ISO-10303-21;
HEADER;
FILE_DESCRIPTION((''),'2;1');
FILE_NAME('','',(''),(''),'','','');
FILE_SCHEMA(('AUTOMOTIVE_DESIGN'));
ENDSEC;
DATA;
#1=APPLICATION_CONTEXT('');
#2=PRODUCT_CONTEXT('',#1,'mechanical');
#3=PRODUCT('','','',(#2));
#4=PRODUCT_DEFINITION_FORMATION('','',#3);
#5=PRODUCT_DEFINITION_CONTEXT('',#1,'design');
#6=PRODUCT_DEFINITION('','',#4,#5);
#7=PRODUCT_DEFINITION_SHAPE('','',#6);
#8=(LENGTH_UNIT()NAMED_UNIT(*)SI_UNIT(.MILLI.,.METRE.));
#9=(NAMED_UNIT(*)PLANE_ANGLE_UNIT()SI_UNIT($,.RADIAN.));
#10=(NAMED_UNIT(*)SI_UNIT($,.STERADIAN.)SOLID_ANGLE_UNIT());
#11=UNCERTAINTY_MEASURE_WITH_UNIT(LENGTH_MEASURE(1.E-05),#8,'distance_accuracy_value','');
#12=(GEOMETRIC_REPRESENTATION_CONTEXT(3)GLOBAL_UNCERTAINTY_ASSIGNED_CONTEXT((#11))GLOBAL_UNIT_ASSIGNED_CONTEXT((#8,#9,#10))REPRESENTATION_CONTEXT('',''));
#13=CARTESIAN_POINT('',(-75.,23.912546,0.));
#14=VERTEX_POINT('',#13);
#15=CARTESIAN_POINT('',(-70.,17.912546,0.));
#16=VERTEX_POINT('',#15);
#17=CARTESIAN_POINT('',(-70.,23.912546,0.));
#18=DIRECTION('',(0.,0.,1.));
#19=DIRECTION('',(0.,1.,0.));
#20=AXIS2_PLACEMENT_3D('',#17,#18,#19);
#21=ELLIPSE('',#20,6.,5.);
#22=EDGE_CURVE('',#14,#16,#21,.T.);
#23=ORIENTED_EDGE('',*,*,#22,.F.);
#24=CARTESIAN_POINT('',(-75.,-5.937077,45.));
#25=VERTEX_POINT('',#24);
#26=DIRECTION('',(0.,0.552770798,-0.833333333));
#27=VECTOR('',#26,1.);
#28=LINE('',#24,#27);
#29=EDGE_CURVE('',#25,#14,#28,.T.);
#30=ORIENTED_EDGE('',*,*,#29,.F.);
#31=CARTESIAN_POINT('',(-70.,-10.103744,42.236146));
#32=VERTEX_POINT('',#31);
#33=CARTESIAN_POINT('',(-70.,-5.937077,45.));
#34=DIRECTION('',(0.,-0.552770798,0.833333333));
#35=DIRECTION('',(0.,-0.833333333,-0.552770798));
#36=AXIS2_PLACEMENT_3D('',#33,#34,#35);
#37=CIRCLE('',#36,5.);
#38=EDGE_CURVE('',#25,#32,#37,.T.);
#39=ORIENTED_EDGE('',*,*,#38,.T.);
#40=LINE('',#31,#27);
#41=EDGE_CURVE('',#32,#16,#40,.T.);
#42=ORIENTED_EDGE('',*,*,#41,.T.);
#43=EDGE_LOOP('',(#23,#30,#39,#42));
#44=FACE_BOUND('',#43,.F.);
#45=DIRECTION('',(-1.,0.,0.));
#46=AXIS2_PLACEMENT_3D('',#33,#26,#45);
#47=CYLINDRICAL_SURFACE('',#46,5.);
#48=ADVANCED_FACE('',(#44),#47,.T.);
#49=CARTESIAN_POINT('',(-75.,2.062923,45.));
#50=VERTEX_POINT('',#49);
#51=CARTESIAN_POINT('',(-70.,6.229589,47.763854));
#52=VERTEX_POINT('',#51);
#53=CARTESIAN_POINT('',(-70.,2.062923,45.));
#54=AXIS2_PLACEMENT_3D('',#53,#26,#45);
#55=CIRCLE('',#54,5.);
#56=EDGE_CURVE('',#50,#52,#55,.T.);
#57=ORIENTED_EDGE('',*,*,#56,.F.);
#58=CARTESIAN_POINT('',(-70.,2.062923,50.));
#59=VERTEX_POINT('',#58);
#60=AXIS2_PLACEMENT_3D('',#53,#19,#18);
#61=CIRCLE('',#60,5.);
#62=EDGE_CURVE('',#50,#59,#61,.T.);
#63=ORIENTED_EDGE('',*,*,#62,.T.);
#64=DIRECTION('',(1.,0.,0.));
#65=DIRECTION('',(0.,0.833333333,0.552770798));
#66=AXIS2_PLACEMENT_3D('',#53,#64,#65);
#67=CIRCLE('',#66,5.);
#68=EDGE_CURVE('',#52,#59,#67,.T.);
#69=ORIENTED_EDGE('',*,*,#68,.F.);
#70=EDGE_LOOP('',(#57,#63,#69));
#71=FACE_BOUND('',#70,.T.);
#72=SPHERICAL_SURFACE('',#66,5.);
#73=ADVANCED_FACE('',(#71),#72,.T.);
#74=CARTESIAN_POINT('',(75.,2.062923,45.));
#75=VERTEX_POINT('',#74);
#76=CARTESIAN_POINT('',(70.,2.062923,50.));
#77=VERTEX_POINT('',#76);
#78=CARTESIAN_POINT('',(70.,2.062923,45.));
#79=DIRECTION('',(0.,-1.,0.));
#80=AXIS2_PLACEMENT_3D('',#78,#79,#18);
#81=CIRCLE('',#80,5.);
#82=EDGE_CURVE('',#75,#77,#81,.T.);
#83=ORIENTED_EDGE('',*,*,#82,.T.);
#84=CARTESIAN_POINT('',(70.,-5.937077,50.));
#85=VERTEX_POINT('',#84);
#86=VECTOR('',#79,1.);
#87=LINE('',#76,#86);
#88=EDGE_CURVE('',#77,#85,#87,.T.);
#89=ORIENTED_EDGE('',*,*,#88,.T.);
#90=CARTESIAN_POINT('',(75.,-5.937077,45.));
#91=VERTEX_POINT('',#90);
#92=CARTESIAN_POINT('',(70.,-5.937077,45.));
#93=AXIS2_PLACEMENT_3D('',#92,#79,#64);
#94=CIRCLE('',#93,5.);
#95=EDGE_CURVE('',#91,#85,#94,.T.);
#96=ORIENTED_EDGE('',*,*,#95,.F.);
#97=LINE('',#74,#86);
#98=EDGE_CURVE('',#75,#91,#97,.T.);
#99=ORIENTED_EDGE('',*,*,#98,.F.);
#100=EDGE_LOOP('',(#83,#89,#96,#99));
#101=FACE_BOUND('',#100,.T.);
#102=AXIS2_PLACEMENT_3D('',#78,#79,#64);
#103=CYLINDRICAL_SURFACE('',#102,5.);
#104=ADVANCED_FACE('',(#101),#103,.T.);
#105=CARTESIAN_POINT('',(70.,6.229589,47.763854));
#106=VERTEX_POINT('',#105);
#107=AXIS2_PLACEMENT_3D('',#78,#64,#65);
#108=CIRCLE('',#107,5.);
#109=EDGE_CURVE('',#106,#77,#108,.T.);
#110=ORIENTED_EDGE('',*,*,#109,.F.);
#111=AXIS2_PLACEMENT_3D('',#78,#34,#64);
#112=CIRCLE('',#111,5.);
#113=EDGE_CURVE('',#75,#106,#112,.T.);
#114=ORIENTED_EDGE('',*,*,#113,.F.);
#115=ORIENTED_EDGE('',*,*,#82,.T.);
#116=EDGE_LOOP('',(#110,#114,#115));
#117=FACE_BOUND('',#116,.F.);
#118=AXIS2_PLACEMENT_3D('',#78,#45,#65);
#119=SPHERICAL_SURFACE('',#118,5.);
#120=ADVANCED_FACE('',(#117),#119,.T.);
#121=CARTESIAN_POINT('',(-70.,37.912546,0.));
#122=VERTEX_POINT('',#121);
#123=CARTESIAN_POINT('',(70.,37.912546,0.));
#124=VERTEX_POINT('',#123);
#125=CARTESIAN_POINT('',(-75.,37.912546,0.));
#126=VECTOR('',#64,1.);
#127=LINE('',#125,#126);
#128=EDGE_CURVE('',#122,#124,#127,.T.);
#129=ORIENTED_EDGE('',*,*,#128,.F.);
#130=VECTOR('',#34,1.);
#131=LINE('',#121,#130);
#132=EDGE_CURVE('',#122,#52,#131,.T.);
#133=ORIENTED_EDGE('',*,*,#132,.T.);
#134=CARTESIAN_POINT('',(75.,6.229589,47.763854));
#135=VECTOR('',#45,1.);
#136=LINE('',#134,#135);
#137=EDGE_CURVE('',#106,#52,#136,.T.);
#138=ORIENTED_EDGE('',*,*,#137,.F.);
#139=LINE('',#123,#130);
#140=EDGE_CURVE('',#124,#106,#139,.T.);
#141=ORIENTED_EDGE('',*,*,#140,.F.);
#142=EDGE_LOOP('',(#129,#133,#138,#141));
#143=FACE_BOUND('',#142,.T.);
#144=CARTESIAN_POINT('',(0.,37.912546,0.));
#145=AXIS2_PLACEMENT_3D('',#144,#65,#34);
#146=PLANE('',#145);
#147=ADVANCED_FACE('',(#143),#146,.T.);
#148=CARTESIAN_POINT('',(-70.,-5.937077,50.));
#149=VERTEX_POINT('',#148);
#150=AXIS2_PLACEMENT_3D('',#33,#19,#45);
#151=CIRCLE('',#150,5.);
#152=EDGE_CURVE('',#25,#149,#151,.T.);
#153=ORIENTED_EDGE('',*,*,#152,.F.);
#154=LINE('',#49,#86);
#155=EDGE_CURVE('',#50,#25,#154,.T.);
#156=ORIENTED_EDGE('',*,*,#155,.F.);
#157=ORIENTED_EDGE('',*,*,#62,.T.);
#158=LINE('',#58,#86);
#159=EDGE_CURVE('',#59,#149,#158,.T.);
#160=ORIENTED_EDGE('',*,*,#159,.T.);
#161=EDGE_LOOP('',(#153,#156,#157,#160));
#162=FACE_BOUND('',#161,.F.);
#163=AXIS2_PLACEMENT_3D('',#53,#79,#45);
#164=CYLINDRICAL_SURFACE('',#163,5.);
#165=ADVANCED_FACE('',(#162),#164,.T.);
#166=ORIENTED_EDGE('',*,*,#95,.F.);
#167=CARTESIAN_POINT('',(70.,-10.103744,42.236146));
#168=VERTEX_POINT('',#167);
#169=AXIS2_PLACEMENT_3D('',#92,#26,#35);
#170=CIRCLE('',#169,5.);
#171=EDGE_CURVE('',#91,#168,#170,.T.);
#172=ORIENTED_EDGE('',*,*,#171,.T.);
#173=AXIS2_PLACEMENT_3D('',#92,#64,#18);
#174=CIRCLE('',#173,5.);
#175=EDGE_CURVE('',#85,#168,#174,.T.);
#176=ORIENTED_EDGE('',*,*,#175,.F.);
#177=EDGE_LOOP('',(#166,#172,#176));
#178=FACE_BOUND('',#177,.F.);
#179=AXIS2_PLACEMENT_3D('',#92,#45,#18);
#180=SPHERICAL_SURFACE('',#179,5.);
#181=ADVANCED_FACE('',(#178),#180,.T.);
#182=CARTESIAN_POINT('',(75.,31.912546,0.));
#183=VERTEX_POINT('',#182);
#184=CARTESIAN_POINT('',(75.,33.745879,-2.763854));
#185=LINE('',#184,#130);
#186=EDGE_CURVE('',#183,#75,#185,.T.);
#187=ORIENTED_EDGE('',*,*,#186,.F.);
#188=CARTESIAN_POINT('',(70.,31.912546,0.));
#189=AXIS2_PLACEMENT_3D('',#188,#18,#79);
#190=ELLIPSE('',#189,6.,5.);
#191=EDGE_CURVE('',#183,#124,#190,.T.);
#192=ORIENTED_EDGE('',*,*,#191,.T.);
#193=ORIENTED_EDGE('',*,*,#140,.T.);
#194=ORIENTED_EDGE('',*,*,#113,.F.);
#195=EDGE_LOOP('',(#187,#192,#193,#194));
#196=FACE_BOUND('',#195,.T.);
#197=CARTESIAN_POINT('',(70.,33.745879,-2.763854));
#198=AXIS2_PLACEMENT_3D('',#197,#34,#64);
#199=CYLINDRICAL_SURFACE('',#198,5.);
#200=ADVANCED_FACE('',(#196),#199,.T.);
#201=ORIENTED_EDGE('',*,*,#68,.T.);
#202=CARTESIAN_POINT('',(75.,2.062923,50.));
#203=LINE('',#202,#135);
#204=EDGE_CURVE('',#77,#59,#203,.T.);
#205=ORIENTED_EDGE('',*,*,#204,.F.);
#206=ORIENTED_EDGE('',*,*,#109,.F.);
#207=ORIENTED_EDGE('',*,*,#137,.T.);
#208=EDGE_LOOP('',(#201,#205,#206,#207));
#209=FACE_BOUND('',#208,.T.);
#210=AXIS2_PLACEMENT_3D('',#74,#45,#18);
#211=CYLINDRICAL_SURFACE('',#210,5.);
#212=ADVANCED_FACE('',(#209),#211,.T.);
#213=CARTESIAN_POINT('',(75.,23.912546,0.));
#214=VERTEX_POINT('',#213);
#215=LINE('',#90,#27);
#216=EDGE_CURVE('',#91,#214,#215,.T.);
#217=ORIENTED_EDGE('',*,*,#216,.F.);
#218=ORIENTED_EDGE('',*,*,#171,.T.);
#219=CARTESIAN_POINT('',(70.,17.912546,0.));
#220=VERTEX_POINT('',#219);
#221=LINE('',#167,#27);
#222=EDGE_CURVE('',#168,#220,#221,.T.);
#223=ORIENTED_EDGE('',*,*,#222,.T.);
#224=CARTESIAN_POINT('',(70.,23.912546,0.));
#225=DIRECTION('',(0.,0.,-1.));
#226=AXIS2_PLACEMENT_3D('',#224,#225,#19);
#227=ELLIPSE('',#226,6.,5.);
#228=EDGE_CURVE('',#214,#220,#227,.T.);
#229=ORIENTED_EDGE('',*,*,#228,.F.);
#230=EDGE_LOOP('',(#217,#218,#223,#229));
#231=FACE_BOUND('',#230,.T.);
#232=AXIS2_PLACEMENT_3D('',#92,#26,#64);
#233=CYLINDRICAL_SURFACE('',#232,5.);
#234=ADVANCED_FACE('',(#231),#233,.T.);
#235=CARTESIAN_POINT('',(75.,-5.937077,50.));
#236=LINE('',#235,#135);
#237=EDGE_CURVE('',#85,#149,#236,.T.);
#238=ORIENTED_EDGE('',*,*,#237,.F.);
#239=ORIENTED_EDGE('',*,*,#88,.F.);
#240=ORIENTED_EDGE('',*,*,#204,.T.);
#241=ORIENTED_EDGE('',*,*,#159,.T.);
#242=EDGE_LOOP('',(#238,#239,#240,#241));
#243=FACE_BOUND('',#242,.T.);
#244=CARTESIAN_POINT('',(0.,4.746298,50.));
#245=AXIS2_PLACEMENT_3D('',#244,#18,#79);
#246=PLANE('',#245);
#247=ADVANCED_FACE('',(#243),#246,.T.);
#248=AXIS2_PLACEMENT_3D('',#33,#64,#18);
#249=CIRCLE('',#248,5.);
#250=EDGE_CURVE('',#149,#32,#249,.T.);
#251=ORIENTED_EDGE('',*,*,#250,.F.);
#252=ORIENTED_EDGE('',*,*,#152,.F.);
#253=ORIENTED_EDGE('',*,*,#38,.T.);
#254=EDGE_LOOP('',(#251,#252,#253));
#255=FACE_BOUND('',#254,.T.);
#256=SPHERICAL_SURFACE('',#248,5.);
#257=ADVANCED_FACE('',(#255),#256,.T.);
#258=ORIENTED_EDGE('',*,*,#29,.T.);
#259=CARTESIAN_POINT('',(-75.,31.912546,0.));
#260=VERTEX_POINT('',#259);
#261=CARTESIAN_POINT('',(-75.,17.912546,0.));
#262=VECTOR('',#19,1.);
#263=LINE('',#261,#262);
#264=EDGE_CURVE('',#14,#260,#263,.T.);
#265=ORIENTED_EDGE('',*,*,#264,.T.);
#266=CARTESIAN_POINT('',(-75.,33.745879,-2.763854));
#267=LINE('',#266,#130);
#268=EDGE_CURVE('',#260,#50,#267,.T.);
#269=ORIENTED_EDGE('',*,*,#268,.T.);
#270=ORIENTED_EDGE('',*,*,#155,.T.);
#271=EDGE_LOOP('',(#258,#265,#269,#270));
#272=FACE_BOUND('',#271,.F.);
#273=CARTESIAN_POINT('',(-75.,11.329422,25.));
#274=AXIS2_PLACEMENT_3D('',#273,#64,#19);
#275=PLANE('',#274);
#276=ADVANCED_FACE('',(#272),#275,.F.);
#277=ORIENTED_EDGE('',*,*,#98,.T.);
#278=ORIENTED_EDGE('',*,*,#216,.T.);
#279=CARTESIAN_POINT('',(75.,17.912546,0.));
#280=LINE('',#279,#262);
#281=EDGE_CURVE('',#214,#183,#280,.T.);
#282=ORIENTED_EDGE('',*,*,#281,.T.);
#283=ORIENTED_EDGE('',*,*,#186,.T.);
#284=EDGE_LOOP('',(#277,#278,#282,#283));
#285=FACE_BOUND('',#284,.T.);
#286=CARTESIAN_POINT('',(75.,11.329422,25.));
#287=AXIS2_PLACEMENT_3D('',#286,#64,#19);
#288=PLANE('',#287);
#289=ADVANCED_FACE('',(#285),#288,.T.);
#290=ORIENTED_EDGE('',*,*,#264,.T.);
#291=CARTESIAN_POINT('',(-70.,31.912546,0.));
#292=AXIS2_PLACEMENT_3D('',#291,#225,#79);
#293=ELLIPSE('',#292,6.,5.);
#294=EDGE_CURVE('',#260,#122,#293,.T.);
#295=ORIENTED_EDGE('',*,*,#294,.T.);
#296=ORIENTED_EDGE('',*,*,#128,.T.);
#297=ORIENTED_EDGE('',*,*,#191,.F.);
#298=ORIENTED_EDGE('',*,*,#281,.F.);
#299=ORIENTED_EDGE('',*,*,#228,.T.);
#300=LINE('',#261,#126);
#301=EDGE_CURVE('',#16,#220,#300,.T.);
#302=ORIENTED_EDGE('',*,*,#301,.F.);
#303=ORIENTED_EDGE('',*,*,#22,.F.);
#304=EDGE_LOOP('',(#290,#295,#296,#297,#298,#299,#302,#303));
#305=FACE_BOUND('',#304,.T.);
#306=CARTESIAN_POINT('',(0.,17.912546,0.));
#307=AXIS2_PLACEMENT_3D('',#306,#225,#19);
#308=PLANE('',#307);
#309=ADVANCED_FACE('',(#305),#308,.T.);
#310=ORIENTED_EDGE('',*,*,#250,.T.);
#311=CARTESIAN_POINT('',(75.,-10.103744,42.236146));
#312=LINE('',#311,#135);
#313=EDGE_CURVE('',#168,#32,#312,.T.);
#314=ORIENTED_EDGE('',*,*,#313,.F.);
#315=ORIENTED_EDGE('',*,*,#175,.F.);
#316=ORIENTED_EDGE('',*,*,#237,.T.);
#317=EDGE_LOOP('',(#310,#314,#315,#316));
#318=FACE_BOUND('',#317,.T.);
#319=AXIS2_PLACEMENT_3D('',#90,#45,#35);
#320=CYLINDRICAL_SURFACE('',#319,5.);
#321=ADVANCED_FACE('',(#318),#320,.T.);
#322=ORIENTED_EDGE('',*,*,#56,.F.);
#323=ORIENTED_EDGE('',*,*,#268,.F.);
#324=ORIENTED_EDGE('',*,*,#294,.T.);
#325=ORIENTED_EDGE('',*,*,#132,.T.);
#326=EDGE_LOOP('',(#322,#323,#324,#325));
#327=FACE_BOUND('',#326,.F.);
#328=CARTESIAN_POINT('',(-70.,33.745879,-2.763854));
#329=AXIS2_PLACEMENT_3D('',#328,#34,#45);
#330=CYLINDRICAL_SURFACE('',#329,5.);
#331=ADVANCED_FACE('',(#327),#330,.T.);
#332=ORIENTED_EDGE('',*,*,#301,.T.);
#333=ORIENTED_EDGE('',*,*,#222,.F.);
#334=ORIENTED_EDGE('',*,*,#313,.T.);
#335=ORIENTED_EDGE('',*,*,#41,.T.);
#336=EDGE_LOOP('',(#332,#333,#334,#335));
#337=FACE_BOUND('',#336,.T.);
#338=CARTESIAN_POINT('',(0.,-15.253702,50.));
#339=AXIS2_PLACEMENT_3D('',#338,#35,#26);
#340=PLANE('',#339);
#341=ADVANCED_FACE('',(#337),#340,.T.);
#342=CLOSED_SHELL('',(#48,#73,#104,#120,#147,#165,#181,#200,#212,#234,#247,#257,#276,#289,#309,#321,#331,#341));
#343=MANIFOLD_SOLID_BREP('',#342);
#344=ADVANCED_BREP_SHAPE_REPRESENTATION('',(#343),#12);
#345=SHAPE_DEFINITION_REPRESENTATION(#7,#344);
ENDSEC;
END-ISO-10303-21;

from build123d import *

# Parameters (mm, degrees)
F1_DEPTH = 75
F2_F1_R  = 5
F2_F2_R  = 5
F2_F3_R  = 5
F2_F4_R  = 5


# Not quite as in the source:
# - a feature of the source that left no trace in its solid (it failed there, or was rolled back) is left out


with BuildPart() as f1:
    # F0 (on Right) → F1 (new body, symmetric)
    with BuildSketch(Plane.YZ):
        Polygon((-15.2537021786, 50), (17.912545725, 0), (37.912545725, 0), (4.7462978214, 50), align=None)
    extrude(amount=F1_DEPTH, both=True)

    # F2: fillet of radius 5 on 4 edges, made by hand

    # F2_f1
    f2_f1_edges = [f1.edges().sort_by_distance(p)[0] for p in [
        (0, -15.2537021786, 50),
    ]]
    fillet(f2_f1_edges, radius=F2_F1_R)

    # F2_f2
    f2_f2_edges = [f1.edges().sort_by_distance(p)[0] for p in [
        (0, 4.7462978214, 50),
    ]]
    fillet(f2_f2_edges, radius=F2_F2_R)

    # F2_f3
    f2_f3_edges = [f1.edges().sort_by_distance(p)[0] for p in [
        (-75, -1.9370773882, 50),
    ]]
    fillet(f2_f3_edges, radius=F2_F3_R)

    # F2_f4
    f2_f4_edges = [f1.edges().sort_by_distance(p)[0] for p in [
        (75, -1.9370773882, 50),
    ]]
    fillet(f2_f4_edges, radius=F2_F4_R)


solid = f1.part
